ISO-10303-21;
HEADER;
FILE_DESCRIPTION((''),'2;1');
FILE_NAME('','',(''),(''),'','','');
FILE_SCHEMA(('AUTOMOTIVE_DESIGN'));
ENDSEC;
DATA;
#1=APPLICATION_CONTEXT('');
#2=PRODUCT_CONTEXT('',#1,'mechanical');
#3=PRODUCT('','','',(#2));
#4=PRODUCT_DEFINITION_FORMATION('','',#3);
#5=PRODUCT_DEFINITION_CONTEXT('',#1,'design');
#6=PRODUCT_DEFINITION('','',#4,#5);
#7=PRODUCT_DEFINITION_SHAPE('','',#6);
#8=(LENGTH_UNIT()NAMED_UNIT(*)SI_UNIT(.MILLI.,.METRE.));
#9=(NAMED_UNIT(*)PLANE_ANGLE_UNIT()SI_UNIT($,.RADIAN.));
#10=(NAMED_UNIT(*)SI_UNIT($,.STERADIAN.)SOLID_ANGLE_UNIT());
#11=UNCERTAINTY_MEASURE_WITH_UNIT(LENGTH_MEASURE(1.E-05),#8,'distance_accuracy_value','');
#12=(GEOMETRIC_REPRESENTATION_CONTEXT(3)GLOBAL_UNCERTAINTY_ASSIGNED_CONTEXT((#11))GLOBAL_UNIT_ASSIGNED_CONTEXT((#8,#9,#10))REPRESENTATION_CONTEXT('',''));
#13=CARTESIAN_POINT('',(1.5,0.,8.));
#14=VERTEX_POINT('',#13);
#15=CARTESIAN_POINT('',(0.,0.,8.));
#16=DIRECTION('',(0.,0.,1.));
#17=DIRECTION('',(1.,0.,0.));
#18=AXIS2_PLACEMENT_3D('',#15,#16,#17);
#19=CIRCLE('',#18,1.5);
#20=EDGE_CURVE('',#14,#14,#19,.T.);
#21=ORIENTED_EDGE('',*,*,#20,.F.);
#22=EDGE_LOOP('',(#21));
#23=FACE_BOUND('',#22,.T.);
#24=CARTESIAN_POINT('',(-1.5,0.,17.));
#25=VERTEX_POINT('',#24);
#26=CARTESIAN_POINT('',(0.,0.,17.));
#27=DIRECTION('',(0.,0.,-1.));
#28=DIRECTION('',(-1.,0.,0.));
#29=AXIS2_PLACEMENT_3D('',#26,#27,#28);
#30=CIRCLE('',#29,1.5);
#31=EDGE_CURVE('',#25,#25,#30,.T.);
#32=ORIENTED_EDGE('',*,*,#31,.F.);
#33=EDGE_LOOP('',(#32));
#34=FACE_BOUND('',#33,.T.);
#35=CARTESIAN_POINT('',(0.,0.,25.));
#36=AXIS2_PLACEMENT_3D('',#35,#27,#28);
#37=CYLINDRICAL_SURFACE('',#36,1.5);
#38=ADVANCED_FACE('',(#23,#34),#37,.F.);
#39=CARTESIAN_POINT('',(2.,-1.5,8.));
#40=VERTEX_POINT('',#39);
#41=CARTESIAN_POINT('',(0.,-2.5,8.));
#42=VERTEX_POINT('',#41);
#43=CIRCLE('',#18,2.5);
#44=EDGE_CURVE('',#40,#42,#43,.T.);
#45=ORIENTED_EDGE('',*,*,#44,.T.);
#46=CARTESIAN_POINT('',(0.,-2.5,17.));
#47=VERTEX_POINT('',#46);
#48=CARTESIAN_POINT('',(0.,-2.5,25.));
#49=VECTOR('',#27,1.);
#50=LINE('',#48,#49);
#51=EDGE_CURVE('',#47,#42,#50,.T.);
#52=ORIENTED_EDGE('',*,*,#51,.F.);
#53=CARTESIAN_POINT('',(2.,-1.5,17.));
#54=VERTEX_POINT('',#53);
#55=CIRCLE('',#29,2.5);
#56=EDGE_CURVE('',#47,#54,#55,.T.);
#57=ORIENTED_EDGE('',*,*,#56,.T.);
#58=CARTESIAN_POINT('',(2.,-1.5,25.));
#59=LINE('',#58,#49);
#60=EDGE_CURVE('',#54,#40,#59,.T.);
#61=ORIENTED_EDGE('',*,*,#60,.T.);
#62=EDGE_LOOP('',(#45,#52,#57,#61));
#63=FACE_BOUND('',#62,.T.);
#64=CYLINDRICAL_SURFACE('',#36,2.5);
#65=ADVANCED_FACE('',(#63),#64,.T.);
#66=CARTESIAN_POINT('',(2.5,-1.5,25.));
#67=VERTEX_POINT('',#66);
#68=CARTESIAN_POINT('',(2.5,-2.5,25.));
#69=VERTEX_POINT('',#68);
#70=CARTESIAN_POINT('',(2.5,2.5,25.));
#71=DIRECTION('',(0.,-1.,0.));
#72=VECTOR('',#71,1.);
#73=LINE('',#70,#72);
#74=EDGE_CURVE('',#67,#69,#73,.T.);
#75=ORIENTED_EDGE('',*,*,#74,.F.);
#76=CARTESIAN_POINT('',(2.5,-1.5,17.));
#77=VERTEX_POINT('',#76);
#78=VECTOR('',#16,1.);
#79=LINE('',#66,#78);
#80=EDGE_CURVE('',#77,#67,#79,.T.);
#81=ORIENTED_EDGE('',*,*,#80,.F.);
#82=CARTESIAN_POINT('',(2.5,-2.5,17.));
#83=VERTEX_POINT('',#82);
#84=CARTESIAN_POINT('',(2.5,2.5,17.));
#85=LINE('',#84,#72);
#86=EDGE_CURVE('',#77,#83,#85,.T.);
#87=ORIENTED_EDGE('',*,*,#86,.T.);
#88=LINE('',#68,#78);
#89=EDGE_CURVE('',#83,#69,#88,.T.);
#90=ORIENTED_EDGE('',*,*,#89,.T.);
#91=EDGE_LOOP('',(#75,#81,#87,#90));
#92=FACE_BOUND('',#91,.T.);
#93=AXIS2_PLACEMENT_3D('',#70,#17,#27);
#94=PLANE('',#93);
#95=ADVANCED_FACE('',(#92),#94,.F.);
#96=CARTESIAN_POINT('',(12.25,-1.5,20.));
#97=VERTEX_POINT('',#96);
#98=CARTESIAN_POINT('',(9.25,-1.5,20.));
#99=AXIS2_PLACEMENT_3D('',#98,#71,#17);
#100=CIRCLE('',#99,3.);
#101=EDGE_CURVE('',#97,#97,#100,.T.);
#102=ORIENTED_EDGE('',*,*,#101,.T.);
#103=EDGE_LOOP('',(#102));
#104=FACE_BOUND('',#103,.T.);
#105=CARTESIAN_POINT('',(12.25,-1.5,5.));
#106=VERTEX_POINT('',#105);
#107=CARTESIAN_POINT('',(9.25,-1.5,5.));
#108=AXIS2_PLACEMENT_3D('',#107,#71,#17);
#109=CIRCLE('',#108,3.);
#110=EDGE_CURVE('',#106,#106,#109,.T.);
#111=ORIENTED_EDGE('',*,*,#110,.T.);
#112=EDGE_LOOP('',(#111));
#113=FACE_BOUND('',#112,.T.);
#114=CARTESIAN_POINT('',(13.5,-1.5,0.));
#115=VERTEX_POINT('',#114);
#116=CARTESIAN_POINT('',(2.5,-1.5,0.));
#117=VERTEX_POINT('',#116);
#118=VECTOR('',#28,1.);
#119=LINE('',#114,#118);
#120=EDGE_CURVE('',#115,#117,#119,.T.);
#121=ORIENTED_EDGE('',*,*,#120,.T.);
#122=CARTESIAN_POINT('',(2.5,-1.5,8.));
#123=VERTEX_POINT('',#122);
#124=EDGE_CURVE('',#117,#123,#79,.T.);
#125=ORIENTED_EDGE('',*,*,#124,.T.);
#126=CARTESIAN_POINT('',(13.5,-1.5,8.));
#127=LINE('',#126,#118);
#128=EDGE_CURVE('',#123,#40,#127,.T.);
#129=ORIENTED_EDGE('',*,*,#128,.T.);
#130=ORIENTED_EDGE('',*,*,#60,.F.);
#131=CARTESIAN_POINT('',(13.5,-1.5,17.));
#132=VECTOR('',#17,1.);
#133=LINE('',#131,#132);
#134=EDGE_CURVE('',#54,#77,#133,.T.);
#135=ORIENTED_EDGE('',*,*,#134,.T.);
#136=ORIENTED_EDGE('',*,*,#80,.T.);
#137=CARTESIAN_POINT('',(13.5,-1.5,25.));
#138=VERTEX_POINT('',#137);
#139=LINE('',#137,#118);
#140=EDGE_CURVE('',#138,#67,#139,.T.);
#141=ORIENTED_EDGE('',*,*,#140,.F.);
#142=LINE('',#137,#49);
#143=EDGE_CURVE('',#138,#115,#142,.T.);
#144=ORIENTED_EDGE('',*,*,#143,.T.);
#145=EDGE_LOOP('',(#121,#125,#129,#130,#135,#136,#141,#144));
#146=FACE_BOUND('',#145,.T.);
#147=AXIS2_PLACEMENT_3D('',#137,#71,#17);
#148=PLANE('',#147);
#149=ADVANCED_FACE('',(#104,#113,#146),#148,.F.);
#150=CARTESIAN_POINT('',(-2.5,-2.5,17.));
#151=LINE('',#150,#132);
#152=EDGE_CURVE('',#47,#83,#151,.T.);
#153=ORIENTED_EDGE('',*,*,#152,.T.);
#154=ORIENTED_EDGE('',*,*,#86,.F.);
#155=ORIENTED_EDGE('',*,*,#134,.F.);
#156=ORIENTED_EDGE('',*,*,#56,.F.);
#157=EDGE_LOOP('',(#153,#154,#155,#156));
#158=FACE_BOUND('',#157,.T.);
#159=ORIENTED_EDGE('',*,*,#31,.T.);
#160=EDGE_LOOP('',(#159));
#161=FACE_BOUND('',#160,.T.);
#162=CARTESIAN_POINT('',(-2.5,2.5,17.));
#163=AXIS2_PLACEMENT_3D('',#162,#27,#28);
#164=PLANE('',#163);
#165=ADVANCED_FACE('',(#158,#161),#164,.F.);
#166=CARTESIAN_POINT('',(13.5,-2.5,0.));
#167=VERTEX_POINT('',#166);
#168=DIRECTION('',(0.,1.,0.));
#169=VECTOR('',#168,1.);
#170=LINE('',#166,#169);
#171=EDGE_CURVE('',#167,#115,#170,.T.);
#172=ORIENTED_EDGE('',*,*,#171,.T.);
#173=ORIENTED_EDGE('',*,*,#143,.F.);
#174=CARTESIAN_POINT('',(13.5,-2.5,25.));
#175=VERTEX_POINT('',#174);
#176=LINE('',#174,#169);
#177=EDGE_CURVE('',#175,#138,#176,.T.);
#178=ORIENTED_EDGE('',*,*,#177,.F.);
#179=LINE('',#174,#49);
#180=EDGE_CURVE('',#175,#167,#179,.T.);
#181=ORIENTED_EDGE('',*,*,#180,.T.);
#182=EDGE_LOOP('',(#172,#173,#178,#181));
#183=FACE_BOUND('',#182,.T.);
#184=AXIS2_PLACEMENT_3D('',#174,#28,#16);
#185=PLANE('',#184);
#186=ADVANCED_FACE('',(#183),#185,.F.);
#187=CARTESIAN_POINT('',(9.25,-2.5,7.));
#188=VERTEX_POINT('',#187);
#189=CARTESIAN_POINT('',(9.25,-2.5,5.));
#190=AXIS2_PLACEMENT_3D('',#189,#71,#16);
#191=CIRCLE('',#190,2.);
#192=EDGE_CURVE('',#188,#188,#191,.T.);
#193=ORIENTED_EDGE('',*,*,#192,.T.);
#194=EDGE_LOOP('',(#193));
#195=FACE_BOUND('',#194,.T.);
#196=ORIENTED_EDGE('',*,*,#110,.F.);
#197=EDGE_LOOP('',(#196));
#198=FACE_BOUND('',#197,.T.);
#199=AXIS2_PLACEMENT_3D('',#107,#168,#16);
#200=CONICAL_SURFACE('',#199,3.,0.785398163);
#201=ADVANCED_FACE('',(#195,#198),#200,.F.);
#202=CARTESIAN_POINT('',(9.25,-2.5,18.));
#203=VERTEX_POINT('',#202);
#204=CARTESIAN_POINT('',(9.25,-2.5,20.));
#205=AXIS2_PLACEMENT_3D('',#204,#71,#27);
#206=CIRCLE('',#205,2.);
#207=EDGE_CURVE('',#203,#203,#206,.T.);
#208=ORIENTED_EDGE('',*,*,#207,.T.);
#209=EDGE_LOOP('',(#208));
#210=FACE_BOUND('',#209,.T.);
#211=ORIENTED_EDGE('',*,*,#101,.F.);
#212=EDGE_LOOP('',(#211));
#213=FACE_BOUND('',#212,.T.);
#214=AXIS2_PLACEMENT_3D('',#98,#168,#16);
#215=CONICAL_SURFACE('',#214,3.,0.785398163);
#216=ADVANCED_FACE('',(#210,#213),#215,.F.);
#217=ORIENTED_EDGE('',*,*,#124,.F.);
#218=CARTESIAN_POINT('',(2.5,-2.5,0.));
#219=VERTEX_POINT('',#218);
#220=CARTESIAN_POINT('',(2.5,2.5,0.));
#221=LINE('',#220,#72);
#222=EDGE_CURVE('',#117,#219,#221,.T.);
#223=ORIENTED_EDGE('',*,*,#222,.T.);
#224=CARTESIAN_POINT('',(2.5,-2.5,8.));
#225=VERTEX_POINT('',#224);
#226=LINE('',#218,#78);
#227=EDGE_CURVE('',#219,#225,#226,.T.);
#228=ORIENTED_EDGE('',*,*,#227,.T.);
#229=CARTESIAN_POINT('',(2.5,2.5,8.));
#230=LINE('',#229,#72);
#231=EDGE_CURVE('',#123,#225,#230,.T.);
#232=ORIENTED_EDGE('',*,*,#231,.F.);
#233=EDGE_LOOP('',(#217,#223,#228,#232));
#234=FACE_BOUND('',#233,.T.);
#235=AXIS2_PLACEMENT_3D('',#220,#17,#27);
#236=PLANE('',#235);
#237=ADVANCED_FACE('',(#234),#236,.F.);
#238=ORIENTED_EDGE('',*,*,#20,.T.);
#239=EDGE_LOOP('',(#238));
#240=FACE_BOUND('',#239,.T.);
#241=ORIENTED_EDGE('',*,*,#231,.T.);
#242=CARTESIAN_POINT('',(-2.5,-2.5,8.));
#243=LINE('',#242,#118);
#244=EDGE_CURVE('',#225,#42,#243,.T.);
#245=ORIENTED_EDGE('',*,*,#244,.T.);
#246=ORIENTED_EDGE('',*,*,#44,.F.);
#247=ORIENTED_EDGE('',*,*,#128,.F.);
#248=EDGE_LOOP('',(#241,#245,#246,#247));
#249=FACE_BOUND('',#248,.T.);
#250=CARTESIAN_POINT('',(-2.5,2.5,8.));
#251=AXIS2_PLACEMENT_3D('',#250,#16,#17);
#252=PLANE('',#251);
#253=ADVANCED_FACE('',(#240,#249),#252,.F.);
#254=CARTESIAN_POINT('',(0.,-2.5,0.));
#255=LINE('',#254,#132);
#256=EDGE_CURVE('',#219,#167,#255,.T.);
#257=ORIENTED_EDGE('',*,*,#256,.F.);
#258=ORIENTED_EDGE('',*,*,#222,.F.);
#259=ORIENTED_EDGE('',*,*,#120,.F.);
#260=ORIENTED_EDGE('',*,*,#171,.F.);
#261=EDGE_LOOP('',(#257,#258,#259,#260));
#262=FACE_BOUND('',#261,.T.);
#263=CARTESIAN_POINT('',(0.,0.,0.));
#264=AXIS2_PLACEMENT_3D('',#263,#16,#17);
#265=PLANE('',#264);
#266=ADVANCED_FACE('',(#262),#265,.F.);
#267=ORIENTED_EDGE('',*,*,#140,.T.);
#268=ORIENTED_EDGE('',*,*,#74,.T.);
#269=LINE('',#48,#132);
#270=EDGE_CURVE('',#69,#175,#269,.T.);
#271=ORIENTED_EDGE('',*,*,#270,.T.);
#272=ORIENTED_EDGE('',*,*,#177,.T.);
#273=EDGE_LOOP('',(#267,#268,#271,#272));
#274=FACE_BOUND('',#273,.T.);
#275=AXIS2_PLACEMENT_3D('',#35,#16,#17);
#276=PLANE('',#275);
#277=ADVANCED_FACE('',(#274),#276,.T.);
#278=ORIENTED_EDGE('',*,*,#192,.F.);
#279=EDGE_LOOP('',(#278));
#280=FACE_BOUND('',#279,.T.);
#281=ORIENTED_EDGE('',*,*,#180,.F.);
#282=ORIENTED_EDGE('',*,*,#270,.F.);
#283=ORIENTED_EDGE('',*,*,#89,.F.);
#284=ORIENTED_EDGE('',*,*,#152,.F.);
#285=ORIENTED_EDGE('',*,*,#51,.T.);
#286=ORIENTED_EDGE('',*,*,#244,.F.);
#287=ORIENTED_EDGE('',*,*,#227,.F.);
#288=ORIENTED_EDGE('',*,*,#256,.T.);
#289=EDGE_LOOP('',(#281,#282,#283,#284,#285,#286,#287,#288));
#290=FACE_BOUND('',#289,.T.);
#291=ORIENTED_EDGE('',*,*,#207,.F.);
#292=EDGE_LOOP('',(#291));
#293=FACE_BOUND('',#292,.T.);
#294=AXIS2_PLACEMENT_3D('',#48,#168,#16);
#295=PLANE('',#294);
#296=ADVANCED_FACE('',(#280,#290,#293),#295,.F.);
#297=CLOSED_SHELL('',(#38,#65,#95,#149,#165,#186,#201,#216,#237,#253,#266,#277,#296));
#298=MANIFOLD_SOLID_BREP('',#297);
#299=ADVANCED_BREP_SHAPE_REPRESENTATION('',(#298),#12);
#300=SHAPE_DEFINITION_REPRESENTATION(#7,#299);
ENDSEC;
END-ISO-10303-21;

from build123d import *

# Parameters (mm, degrees)
SKETCH_1_R          = 1.5
EXTRUDE_1_DEPTH     = 25
SKETCH_2_R          = 2
SKETCH_2_W          = 5
SKETCH_2_H          = 8
CUT_EXTRUDE_1_DEPTH = 29.848743474
CHAMFER_1_SIZE      = 1


with BuildPart() as part:
    # 草图1 → 凸台-拉伸1 (new body)
    with BuildSketch(Plane.XY):
        with BuildLine():
            Line((0, -2.5), (13.5, -2.5))
            Line((13.5, -2.5), (13.5, -1.5))
            Line((13.5, -1.5), (2, -1.5))
            ThreePointArc((2, -1.5), (-1.118033989, 2.236067977), (0, -2.5))
        make_face()
        Circle(SKETCH_1_R, mode=Mode.SUBTRACT)
    extrude(amount=EXTRUDE_1_DEPTH)

    # 草图2 → 切除-拉伸1 (cut, through all)
    with BuildSketch(Plane.XZ.offset(2.5)):
        with Locations(Location((9.25, 20, 0), (0, 0, 270))):
            Circle(SKETCH_2_R)
        with Locations((9.25, 5)):
            Circle(SKETCH_2_R)
        with Locations((0, 4)):
            Rectangle(SKETCH_2_W, SKETCH_2_H)
        with Locations((0, 21)):
            Rectangle(SKETCH_2_W, SKETCH_2_H)
    extrude(amount=-CUT_EXTRUDE_1_DEPTH, mode=Mode.SUBTRACT)

    # 倒角1
    chamfer_1_edges = [part.edges().sort_by_distance(p)[0] for p in [
        (7.25, -1.5, 5),
        (9.25, -1.5, 22),
    ]]
    chamfer(chamfer_1_edges, length=CHAMFER_1_SIZE - 0.0001)  # a hair under: the kernel refuses the full size


solid = part.part
